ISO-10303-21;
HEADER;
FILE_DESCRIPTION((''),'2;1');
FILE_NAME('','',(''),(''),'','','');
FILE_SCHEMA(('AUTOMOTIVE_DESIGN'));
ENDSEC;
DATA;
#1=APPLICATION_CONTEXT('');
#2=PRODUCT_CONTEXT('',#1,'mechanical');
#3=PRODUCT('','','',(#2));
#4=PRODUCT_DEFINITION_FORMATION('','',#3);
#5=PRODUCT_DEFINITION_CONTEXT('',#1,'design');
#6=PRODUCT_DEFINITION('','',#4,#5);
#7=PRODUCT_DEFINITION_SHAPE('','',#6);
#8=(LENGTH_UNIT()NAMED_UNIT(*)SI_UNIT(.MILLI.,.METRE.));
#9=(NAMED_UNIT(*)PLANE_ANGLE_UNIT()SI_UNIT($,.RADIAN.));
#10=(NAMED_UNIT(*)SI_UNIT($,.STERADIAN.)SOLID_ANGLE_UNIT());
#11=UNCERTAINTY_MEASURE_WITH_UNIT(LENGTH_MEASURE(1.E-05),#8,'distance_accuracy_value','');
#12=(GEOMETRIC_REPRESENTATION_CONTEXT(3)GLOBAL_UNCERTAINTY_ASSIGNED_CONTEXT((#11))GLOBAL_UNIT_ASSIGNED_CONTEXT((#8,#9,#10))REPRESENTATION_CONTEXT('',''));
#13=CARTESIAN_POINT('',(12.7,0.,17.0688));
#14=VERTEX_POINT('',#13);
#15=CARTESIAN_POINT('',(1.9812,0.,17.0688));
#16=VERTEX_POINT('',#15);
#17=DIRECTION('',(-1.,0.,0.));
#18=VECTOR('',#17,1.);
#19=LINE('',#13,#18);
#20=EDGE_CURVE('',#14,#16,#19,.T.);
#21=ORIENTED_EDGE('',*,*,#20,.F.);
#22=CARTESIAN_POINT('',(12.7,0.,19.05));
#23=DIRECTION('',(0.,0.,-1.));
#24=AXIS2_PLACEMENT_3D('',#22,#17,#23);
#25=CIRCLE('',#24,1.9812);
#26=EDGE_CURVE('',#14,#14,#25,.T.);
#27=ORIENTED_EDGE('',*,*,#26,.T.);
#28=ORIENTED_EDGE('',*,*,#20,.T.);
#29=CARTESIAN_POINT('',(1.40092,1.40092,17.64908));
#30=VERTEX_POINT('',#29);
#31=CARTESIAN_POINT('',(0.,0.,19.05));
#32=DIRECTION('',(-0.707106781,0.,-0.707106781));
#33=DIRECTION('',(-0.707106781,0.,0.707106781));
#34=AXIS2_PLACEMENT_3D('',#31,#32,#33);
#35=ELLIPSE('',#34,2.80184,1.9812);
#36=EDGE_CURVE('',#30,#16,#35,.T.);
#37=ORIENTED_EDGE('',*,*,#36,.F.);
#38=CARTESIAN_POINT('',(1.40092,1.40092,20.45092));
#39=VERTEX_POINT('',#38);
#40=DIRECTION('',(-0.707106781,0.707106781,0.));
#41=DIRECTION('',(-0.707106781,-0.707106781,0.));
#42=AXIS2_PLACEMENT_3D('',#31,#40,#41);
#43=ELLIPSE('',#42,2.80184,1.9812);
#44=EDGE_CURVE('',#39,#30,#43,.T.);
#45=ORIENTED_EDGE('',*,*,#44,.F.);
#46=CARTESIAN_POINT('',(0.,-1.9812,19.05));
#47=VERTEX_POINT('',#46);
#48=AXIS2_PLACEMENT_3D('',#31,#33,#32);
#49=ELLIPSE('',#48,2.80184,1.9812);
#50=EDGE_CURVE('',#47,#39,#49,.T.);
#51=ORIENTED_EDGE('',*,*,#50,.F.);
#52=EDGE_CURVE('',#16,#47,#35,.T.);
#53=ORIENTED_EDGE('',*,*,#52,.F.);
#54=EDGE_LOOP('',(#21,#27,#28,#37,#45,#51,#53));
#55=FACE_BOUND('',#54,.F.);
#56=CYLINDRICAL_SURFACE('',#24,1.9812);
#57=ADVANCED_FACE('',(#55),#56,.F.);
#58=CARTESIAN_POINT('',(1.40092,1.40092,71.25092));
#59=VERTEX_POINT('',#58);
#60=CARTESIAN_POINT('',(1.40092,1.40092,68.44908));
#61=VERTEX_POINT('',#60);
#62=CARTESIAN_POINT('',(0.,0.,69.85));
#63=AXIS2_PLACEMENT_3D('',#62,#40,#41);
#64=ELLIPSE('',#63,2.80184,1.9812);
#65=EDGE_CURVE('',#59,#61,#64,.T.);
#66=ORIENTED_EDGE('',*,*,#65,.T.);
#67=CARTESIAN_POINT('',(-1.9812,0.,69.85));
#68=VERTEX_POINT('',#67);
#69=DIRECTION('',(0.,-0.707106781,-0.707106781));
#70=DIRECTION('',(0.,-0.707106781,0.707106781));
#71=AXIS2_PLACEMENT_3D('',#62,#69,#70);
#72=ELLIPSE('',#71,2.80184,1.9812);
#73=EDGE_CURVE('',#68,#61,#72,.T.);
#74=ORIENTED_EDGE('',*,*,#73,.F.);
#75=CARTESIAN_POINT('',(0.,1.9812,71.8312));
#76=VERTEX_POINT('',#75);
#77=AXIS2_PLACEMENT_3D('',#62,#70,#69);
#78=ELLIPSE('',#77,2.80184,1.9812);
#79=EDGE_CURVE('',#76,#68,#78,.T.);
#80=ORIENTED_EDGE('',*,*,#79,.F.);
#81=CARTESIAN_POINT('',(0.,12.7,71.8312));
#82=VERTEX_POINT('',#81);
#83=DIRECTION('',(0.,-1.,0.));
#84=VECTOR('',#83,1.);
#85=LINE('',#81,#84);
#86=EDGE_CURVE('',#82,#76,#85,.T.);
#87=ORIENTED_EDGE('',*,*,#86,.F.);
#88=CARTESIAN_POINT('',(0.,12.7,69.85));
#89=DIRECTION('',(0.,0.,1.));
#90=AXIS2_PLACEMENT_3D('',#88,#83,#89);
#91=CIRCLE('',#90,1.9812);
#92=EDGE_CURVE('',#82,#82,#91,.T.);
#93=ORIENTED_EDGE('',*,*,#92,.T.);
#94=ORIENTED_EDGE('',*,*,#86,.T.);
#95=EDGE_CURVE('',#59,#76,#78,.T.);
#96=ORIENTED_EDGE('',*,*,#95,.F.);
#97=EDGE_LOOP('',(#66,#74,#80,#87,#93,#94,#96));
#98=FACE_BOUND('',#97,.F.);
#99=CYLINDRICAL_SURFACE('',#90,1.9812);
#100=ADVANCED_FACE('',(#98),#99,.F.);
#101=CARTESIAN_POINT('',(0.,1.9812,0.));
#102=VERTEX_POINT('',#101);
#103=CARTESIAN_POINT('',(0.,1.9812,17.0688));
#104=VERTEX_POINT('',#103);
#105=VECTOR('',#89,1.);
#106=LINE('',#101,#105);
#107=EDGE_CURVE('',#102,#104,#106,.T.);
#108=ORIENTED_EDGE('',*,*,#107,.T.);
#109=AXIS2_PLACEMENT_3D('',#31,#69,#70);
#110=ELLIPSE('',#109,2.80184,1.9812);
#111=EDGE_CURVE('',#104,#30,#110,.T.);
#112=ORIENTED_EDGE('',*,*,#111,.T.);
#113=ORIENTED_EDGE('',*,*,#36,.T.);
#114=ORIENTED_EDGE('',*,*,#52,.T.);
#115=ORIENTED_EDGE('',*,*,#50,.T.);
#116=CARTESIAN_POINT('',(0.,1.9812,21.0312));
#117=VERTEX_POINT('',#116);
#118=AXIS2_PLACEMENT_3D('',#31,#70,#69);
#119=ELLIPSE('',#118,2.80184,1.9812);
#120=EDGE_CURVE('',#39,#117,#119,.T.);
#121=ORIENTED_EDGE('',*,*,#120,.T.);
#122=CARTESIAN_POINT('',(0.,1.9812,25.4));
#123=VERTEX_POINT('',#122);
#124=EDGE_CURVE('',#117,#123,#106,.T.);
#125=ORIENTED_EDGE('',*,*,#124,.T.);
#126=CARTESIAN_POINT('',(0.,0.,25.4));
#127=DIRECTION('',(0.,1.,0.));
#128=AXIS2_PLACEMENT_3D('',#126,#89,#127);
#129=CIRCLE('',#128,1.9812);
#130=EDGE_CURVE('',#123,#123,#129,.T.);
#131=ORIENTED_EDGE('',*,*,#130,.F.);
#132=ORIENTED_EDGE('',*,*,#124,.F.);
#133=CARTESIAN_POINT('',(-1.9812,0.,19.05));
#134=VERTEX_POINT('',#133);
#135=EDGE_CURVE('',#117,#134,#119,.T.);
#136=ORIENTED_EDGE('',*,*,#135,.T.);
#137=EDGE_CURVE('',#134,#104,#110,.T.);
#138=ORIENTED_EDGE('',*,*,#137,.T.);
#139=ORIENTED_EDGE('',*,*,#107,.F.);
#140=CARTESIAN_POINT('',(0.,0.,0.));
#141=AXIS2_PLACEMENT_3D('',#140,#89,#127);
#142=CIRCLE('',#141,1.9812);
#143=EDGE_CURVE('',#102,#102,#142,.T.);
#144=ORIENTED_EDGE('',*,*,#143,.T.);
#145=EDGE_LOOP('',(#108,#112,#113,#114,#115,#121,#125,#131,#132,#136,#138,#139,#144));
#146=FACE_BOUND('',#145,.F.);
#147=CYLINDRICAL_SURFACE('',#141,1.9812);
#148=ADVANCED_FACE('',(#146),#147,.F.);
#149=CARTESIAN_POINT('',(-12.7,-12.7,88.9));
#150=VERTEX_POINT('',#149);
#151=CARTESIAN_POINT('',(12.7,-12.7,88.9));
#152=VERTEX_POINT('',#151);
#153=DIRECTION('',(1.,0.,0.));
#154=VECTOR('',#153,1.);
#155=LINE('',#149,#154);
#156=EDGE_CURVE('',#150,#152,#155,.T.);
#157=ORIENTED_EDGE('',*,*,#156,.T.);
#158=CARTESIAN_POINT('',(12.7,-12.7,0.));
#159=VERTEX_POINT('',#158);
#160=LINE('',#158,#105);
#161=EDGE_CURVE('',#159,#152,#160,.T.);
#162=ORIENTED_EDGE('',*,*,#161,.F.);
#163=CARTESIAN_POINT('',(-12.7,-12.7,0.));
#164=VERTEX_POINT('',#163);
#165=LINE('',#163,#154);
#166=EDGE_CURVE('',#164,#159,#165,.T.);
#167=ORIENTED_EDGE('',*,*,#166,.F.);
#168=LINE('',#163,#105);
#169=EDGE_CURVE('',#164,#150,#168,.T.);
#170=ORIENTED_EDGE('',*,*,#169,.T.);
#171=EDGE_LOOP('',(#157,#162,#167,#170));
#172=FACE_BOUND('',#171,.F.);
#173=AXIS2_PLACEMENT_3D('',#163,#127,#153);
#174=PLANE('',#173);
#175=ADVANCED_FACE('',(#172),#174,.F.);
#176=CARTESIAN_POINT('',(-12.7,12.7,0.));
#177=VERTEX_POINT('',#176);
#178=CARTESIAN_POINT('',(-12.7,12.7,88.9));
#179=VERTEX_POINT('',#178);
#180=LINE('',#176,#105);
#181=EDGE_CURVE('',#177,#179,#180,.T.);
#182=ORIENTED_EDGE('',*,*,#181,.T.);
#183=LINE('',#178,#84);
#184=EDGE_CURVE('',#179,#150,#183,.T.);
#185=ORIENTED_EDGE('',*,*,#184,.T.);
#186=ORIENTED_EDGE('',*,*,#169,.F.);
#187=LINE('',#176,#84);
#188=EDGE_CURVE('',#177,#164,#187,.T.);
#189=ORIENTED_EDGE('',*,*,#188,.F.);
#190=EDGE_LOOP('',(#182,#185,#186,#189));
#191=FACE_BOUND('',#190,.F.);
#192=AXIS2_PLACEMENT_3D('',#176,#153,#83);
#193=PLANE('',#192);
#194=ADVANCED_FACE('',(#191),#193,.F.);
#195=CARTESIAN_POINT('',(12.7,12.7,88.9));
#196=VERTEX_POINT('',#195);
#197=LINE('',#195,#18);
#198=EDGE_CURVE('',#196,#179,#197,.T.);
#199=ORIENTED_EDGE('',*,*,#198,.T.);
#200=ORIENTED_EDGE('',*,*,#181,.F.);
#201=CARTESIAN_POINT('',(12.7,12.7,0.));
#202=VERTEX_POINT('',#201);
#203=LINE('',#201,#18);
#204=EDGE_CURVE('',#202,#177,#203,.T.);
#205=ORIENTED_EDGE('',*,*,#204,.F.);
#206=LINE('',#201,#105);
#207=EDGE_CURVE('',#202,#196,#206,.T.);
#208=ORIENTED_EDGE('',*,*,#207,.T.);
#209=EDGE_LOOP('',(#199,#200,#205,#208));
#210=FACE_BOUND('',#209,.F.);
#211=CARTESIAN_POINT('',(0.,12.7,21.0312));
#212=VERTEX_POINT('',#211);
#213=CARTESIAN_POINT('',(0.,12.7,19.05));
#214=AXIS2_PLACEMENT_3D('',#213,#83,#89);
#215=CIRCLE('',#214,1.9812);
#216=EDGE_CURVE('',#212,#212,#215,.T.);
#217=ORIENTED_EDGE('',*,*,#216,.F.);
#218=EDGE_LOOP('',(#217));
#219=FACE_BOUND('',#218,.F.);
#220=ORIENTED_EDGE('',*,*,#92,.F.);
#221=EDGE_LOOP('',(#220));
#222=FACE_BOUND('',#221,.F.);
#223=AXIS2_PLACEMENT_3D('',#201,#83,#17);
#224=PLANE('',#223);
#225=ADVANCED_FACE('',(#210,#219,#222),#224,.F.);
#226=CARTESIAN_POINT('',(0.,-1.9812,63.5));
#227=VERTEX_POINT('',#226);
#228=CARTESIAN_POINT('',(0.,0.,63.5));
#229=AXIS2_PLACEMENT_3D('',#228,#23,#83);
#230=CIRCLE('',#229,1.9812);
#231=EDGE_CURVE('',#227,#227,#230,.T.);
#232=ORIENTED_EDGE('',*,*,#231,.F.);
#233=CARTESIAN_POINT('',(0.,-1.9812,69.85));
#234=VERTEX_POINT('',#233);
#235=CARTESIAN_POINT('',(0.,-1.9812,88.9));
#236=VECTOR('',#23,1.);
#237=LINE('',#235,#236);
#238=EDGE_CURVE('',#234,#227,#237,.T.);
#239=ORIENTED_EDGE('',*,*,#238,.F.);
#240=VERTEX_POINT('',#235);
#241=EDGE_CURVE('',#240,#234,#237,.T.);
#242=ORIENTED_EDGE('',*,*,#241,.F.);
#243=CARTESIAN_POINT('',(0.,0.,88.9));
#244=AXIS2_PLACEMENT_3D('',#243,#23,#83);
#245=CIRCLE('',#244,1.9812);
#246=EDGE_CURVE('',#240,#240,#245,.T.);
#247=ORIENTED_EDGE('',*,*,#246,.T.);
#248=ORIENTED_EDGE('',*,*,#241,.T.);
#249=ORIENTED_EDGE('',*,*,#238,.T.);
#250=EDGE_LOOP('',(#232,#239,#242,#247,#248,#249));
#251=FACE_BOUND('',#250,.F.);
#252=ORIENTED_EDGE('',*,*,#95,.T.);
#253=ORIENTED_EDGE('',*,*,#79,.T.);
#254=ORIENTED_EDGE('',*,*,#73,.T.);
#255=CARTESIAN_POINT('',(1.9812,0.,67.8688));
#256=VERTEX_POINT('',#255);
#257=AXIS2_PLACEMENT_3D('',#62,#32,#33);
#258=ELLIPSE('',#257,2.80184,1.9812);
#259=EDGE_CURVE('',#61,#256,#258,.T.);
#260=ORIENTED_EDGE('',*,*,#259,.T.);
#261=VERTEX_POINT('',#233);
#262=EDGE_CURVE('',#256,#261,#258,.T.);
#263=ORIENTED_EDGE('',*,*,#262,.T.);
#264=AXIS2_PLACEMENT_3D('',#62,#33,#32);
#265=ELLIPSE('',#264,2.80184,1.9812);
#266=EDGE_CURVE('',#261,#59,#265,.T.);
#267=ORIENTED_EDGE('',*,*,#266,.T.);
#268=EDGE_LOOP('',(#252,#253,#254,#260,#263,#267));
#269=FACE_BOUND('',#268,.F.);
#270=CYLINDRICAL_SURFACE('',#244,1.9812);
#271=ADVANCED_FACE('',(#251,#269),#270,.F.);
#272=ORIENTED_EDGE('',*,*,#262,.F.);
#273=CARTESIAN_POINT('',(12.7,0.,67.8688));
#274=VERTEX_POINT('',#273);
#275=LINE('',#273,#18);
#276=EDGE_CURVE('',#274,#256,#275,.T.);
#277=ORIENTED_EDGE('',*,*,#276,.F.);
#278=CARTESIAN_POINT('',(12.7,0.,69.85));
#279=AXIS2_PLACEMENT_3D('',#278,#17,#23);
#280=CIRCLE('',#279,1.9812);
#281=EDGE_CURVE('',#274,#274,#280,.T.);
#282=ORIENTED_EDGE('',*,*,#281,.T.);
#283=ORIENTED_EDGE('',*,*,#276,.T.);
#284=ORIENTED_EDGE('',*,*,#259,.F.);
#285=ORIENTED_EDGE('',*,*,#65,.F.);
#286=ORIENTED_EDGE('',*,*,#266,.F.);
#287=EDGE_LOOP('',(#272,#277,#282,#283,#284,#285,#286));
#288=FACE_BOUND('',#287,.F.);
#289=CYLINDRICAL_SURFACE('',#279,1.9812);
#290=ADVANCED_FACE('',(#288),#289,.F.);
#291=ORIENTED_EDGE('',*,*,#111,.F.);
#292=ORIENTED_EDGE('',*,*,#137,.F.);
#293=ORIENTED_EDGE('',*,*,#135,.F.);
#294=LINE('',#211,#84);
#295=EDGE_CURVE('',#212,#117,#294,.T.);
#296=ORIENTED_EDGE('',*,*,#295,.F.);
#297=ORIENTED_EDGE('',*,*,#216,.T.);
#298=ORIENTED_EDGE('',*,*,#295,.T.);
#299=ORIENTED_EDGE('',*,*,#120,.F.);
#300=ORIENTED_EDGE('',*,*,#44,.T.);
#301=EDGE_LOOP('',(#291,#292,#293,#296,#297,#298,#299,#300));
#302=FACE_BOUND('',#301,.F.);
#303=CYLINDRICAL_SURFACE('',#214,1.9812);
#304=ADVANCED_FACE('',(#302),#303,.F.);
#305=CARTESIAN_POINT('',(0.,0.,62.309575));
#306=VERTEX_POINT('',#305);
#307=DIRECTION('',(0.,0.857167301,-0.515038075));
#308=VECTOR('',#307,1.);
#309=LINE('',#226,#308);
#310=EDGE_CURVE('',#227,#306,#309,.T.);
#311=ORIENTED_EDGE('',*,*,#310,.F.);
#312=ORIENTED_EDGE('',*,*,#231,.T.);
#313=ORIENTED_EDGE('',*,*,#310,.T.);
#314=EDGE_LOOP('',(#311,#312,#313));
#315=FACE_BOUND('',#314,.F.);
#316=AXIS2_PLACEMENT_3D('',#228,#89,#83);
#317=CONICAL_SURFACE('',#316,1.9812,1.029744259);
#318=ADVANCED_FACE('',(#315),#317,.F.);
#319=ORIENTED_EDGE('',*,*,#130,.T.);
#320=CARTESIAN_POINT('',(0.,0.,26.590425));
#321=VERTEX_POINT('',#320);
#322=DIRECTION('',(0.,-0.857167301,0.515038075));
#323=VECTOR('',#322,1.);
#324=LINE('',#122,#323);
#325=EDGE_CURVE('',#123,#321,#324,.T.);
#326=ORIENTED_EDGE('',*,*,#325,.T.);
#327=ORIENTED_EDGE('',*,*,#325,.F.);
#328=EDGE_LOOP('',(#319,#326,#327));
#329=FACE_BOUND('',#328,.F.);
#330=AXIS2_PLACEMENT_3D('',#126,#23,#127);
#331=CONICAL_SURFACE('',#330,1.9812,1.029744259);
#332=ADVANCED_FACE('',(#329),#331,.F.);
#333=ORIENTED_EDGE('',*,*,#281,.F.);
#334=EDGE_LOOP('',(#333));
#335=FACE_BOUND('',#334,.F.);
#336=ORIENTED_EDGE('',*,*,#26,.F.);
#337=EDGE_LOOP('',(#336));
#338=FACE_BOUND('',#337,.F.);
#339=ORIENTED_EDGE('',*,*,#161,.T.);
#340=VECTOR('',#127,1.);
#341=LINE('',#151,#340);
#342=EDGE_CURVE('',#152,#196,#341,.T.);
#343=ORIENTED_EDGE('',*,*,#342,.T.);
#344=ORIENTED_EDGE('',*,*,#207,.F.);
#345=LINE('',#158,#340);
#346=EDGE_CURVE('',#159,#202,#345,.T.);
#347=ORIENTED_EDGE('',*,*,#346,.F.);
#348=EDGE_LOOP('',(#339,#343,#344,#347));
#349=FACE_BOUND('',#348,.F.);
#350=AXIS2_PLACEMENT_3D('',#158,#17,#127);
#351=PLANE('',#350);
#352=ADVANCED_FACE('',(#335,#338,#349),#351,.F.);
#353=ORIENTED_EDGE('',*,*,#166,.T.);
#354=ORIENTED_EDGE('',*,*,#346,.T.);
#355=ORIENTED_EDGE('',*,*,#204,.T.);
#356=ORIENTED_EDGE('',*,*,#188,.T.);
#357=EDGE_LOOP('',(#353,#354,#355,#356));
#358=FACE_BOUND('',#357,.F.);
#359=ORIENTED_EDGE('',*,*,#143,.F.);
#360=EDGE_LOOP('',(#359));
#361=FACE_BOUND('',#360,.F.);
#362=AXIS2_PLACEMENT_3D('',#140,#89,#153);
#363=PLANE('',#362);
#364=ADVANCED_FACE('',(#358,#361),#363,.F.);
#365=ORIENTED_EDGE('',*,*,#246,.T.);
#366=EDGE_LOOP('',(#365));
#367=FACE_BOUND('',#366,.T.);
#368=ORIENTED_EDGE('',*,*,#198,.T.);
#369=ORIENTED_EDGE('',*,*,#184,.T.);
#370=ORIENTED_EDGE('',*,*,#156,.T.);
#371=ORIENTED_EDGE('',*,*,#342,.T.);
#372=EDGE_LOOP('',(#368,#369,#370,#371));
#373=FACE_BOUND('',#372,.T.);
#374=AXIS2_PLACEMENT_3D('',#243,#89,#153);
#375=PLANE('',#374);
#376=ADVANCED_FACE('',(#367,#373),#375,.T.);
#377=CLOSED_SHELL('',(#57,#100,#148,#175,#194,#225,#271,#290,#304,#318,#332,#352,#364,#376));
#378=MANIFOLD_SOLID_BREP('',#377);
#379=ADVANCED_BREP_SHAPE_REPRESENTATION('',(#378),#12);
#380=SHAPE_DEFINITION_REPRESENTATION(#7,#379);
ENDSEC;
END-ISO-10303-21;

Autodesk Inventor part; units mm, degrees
ref_plane "YZ Plane" through (0, 0, 0) normal (1, 0, 0) x (0, 1, 0)
ref_plane "XZ Plane" through (0, 0, 0) normal (0, 1, 0) x (-1, 0, 0)
ref_plane "XY Plane" through (0, 0, 0) normal (0, 0, 1) x (1, 0, 0)
sketch "Sketch1" plane through (0, 0, 0) normal (0, 0, 1) x (1, 0, 0)
  line L0 (-12.7, -12.7) -> (12.7, -12.7)
  line L1 (12.7, -12.7) -> (12.7, 12.7)
  line L2 (12.7, 12.7) -> (-12.7, 12.7)
  line L3 (-12.7, 12.7) -> (-12.7, -12.7)
  line L4 (-12.7, -12.7) -> (12.7, 12.7) construction
  line L5 (12.7, -12.7) -> (-12.7, 12.7) construction
  point P0 (0, 0)
  dimension "d0" = 25.4
  dimension "d1" = 25.4
extrude "Extrusion1" add sketch "Sketch1" along normal blind 88.9
sketch "Sketch2" plane through (12.7, -12.7, 0) normal (1, 0, 0) x (0, 0, -1)
  line L0 (-88.9, 0) -> (-88.9, 25.4) projected
  line L1 (0, 0) -> (0, 25.4) projected
  line L2 (0, 0) -> (-88.9, 0) projected
  point P0 (0, 12.7)
  point P1 (-69.85, 12.7)
  point P2 (-19.05, 12.7)
  dimension "d4" = 19.05
  dimension "d5" = 88.9
  dimension "d7" = 19.05
  dimension "d27" = 25.4
  dimension "d28" = 12.7
hole "Hole1" at (12.7, 0, 69.85) at (12.7, 0, 19.05) direction (-1, 0, 0) diameter 3.9624 depth 12.7 tip angle 118 thread size "10-32 UNF" class "2B" standard "ANSI Unified Screw Threads"
sketch "Sketch3" plane through (-12.7, 12.7, 0) normal (0, 1, 0) x (1, 0, 0)
  line L0 (12.7, -21.0312) -> (12.7, -17.0688) projected
  line L1 (12.7, -71.8312) -> (12.7, -67.8688) projected
  line L2 (25.4, -88.9) -> (0, -88.9) projected
  line L3 (25.4, 0) -> (0, 0) projected
  line L4 (0, 0) -> (0, -88.9) projected
  point P0 (12.7, 0)
  point P1 (12.7, -19.05)
  point P2 (12.7, -69.85)
hole "Hole2" at (0, 12.7, 19.05) at (0, 12.7, 69.85) direction (0, -1, 0) diameter 3.9624 depth 12.7 tip angle 118 thread size "10-32 UNF" class "2B" standard "ANSI Unified Screw Threads"
sketch "Sketch4" plane through (0, 0, 88.9) normal (0, 0, 1) x (1, 0, 0)
  point P0 (0, 0)
  point P1 (0, 0)
hole "Hole3" at (0, 0, 88.9) direction (0, 0, -1) diameter 3.9624 depth 25.4 tip angle 118 thread size "10-32 UNF" class "2B" standard "ANSI Unified Screw Threads"
sketch "Sketch5" plane through (0, 0, 0) normal (0, 0, -1) x (-1, 0, 0)
  point P0 (0, 0)
  point P1 (0, 0)
hole "Hole4" at (0, 0, 0) direction (0, 0, 1) diameter 3.9624 depth 25.4 tip angle 118 thread size "10-32 UNF" class "2B" standard "ANSI Unified Screw Threads"
equation "\"d7\" = d4"
equation "\"d28\" = 0.5 * d27"
properties part number "CH3-DiffBoxGussetBlock"
